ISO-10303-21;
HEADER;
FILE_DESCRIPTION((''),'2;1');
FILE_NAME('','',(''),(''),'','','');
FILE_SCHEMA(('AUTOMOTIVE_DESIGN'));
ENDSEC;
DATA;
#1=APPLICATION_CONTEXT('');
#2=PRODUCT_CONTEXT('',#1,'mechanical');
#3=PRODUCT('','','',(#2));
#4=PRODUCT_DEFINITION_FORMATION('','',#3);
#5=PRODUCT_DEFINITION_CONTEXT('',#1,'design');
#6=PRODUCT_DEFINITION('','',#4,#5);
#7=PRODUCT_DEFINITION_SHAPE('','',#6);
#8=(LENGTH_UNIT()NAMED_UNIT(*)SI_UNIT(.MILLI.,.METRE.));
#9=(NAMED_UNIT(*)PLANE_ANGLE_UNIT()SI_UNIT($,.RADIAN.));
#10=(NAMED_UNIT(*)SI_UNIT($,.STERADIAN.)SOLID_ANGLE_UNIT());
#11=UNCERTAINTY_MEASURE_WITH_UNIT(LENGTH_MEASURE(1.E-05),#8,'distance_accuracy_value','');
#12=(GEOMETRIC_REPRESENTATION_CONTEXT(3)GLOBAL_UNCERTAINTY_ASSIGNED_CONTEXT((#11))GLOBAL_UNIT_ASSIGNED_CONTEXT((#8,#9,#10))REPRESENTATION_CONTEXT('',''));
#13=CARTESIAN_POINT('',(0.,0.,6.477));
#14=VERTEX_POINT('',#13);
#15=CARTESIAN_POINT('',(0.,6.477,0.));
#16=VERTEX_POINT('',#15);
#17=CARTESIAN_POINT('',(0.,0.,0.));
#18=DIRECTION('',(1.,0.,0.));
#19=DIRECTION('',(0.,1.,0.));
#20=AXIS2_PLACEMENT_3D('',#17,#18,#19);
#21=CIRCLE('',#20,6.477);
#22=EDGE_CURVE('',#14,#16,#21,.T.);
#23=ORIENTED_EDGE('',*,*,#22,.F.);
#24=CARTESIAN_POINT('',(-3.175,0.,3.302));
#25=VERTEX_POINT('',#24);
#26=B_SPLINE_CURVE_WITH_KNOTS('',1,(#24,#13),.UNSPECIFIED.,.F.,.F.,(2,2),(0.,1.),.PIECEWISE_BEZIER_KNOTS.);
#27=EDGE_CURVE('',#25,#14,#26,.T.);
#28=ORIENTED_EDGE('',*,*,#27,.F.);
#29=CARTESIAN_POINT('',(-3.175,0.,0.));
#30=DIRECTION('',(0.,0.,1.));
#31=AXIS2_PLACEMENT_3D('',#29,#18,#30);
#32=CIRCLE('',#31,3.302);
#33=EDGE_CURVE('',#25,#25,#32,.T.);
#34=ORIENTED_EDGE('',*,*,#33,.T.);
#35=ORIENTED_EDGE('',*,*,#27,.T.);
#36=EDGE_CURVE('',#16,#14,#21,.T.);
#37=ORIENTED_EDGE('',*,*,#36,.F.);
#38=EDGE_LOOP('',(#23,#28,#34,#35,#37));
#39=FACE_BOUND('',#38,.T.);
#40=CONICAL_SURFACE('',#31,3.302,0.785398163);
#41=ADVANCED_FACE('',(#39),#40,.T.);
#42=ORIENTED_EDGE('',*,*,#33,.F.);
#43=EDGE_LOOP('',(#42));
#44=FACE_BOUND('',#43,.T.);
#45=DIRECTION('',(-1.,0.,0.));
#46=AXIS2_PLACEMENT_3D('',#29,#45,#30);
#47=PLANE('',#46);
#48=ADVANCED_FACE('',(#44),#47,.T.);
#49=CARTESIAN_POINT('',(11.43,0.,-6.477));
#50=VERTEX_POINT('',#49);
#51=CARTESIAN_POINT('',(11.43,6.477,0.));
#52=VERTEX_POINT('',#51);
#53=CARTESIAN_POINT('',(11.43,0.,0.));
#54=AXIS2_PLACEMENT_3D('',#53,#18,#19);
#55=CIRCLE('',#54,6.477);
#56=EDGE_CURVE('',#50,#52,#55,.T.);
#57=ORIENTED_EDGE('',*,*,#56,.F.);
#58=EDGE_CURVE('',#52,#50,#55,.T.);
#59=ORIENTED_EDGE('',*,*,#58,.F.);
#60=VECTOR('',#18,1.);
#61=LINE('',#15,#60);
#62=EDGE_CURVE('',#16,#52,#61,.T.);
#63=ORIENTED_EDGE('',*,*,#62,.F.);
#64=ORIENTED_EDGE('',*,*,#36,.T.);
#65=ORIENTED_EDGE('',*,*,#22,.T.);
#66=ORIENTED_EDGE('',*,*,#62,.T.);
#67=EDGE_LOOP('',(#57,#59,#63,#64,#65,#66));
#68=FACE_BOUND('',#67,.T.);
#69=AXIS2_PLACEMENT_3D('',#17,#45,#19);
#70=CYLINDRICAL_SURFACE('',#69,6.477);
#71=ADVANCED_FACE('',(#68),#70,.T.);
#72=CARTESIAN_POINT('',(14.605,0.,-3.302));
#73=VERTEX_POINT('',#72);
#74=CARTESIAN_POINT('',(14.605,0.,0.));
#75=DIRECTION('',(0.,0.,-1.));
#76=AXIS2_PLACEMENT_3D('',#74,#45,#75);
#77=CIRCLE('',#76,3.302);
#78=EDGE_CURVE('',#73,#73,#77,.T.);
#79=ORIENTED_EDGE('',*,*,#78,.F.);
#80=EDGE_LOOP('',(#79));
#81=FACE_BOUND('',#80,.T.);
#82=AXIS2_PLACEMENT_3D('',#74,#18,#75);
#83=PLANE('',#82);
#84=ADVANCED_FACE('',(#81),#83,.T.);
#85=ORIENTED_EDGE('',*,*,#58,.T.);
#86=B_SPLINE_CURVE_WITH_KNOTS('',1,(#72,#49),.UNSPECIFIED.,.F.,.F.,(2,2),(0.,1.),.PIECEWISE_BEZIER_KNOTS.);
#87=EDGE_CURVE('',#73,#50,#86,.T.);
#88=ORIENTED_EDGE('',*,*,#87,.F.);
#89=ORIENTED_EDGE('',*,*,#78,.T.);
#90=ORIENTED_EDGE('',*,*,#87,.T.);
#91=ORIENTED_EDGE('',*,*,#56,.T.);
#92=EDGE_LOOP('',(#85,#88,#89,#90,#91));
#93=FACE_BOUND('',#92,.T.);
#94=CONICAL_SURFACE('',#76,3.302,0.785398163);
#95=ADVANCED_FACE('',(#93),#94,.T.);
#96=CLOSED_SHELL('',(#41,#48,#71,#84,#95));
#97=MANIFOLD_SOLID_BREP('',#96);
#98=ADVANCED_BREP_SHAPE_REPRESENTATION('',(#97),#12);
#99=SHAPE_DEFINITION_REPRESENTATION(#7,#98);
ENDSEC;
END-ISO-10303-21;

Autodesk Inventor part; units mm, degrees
ref_plane "YZ Plane" through (0, 0, 0) normal (1, 0, 0) x (0, 1, 0)
sketch "Sketch1" plane through (0, 0, 0) normal (1, 0, 0) x (0, 1, 0)
  circle A0 centre (0, 0) radius 6.477
  dimension "d0" = 12.954
extrude "Extrusion1" add sketch "Sketch1" along normal blind 11.43
sketch "Sketch2" plane through (11.43, 0, 0) normal (1, 0, 0) x (0, 0, -1)
  circle A0 centre (0, 0) radius 6.477
ref_plane "Work Plane1" through (14.605, 0, 0) normal (1, 0, 0) x (0, 0, -1)
sketch "Sketch3" plane through (14.605, 0, 0) normal (1, 0, 0) x (0, 0, -1)
  circle A0 centre (0, 0) radius 3.302
  dimension "d4" = 6.604
loft "Loft1" add profiles "Sketch3" section 2 edges at (11.43, -6.477, 0)
ref_plane "Work Plane2" through (-3.175, 0, 0) normal (-1, 0, 0) x (0, 0, 1)
sketch "Sketch4" plane through (-3.175, 0, 0) normal (-1, 0, 0) x (0, 0, 1)
  circle A0 centre (0, 0) radius 3.302
  dimension "d10" = 6.604
loft "Loft2" add profiles "Sketch4" section 2 edges at (0, -6.477, 0)
properties part number "shaft 6x24"
